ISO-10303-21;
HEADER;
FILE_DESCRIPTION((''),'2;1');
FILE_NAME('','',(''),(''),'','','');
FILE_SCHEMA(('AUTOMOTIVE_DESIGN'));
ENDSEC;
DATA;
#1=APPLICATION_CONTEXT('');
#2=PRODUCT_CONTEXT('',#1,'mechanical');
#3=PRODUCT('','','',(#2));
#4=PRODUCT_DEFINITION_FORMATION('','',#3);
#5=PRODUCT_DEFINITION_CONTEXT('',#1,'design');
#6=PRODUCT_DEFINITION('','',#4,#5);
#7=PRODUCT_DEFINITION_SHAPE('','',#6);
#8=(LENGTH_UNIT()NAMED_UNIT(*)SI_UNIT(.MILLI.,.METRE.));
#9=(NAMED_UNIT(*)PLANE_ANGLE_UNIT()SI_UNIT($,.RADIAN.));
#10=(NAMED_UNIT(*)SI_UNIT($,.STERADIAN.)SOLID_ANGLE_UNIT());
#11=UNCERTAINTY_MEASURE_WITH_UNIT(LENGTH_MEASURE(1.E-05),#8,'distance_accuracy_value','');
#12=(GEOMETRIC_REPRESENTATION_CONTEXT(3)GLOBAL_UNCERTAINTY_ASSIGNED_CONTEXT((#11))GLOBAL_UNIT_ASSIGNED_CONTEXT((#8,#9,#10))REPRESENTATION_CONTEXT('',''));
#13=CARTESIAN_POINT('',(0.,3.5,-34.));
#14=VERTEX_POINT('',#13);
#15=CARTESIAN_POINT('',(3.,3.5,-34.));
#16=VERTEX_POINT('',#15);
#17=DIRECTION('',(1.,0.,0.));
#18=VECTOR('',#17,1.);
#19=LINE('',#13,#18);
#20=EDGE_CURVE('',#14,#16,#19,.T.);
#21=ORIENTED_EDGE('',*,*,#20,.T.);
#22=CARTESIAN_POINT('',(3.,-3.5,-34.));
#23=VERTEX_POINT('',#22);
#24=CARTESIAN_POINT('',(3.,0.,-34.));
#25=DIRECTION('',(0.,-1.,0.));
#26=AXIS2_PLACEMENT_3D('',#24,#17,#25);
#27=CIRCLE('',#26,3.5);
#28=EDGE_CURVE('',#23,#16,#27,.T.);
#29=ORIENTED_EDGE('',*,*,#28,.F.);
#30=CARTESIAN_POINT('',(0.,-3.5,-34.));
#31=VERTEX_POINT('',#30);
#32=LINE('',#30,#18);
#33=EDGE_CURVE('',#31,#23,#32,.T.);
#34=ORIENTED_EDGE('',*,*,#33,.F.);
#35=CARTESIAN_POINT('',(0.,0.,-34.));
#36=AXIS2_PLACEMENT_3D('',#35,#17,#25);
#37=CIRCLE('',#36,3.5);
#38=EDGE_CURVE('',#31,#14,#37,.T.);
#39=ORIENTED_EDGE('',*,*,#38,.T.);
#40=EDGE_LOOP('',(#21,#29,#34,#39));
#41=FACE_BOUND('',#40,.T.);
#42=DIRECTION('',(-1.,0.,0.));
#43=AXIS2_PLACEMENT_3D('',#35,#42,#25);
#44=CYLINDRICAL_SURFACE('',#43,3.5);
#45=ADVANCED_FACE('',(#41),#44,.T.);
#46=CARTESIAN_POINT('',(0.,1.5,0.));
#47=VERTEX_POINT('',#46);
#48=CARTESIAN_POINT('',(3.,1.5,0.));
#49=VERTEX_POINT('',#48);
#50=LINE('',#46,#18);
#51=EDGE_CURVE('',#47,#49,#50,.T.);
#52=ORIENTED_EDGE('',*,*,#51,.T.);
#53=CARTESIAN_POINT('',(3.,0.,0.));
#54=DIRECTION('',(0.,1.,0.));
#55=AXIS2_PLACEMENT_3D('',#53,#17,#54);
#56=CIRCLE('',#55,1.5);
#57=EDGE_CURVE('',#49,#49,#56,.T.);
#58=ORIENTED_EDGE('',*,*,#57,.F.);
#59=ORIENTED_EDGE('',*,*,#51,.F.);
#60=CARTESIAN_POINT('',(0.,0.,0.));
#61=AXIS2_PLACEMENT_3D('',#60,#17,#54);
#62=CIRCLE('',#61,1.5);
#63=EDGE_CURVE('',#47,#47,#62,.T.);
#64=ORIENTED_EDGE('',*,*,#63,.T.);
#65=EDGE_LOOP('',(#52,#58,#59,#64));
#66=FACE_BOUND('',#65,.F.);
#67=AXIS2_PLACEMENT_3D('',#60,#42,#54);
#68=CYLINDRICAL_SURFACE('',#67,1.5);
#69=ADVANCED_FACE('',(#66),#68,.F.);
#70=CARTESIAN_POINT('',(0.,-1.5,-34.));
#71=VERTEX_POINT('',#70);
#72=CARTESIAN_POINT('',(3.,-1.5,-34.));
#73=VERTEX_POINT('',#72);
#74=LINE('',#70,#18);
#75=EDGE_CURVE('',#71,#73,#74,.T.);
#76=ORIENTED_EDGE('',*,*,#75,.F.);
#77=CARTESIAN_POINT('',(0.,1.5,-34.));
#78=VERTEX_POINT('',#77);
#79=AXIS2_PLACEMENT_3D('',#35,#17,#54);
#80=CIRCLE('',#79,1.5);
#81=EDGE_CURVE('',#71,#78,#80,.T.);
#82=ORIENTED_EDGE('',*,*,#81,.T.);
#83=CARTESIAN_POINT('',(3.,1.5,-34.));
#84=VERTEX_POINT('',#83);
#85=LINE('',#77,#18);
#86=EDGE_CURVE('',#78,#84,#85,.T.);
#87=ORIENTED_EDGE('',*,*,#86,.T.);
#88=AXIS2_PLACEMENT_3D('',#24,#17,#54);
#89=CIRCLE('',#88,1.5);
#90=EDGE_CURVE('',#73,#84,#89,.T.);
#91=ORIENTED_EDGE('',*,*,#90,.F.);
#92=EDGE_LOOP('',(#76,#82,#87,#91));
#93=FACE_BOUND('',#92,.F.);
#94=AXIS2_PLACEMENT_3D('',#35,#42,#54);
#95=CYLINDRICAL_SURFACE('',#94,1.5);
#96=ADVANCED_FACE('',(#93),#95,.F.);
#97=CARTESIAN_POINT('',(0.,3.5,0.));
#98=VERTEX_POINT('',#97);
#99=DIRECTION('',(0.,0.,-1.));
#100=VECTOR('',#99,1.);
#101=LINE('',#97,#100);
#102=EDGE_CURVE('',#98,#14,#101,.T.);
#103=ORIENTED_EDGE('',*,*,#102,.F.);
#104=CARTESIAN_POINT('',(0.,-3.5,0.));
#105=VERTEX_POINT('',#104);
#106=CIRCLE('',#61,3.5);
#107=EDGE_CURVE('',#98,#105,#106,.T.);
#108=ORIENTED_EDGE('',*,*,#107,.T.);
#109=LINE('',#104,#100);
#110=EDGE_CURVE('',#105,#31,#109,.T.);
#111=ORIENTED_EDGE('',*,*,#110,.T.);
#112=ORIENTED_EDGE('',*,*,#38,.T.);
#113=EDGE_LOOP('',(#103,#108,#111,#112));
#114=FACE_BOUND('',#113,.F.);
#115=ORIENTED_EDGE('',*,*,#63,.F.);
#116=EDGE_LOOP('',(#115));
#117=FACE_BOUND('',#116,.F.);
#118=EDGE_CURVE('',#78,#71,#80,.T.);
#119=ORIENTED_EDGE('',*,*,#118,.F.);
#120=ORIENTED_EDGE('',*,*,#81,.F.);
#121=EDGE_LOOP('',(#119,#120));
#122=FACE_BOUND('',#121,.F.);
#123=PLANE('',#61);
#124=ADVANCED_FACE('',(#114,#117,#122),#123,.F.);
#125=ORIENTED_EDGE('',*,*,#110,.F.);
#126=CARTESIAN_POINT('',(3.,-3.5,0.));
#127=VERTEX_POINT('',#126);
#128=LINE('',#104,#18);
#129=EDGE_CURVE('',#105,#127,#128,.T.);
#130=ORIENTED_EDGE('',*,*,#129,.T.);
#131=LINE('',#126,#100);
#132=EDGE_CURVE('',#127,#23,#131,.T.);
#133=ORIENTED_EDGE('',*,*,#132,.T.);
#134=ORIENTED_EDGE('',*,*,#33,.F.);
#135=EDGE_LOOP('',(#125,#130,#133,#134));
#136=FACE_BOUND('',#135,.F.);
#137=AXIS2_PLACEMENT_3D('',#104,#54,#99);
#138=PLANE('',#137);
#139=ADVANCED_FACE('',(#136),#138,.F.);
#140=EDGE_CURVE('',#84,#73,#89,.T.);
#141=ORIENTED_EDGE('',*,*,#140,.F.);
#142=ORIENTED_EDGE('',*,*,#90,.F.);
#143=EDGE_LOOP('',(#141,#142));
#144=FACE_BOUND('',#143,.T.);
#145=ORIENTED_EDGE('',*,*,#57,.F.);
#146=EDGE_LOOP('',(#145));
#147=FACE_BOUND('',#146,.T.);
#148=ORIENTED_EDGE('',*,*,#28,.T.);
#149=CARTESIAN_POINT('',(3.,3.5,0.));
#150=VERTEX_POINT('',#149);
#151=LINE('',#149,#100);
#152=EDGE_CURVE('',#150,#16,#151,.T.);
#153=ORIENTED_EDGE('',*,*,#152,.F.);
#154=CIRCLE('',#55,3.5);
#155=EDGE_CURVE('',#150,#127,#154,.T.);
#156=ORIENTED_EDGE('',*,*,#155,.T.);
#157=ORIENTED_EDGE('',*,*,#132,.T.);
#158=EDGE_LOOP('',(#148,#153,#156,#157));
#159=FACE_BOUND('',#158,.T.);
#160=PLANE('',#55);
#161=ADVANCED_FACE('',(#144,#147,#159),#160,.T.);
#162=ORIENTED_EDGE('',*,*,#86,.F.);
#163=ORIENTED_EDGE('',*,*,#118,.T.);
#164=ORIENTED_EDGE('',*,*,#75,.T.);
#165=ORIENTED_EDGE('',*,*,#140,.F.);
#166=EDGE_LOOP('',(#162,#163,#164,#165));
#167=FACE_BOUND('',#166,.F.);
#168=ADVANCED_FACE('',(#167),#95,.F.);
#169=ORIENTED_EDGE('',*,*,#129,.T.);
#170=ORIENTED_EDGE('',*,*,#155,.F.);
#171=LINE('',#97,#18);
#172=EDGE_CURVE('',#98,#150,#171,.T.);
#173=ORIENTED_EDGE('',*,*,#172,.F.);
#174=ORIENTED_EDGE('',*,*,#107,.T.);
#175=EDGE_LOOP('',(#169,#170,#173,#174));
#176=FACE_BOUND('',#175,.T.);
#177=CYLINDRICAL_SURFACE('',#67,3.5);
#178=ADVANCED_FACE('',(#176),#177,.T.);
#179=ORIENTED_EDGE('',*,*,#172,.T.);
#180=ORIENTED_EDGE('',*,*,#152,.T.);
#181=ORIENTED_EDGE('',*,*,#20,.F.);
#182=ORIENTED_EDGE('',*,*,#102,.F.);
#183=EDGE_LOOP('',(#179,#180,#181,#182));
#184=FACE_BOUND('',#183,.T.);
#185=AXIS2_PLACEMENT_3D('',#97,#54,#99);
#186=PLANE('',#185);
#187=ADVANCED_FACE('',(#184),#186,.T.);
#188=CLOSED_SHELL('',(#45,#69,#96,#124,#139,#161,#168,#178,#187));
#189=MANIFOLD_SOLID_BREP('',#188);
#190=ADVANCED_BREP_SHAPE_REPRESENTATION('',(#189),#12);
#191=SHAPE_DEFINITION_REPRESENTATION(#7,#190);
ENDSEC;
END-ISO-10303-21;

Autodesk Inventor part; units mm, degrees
ref_plane "YZ Plane" through (0, 0, 0) normal (1, 0, 0) x (0, 1, 0)
ref_plane "XZ Plane" through (0, 0, 0) normal (0, 1, 0) x (-1, 0, 0)
ref_plane "XY Plane" through (0, 0, 0) normal (0, 0, 1) x (1, 0, 0)
sketch "Sketch1" plane through (0, 0, 0) normal (1, 0, 0) x (0, 1, 0)
  circle A0 centre (0, 0) radius 1.5
  arc A1 (3.5, 0) -> (-3.5, 0) centre (0, 0) ccw
  line L0 (3.5, 0) -> (3.5, -34)
  line L1 (-3.5, 0) -> (-3.5, -34)
  line L2 (-3.5, -34) -> (0, -34)
  circle A2 centre (0, -34) radius 1.5
  arc A3 (-3.5, -34) -> (3.5, -34) centre (0, -34) ccw
  dimension "d0" = 3
  dimension "d1" = 7
  dimension "d2" = 34
  dimension "d3" = 34
  dimension "d4" = 3
extrude "Extrusion1" add sketch "Sketch1" along normal blind 3
properties part number "union_acr"
